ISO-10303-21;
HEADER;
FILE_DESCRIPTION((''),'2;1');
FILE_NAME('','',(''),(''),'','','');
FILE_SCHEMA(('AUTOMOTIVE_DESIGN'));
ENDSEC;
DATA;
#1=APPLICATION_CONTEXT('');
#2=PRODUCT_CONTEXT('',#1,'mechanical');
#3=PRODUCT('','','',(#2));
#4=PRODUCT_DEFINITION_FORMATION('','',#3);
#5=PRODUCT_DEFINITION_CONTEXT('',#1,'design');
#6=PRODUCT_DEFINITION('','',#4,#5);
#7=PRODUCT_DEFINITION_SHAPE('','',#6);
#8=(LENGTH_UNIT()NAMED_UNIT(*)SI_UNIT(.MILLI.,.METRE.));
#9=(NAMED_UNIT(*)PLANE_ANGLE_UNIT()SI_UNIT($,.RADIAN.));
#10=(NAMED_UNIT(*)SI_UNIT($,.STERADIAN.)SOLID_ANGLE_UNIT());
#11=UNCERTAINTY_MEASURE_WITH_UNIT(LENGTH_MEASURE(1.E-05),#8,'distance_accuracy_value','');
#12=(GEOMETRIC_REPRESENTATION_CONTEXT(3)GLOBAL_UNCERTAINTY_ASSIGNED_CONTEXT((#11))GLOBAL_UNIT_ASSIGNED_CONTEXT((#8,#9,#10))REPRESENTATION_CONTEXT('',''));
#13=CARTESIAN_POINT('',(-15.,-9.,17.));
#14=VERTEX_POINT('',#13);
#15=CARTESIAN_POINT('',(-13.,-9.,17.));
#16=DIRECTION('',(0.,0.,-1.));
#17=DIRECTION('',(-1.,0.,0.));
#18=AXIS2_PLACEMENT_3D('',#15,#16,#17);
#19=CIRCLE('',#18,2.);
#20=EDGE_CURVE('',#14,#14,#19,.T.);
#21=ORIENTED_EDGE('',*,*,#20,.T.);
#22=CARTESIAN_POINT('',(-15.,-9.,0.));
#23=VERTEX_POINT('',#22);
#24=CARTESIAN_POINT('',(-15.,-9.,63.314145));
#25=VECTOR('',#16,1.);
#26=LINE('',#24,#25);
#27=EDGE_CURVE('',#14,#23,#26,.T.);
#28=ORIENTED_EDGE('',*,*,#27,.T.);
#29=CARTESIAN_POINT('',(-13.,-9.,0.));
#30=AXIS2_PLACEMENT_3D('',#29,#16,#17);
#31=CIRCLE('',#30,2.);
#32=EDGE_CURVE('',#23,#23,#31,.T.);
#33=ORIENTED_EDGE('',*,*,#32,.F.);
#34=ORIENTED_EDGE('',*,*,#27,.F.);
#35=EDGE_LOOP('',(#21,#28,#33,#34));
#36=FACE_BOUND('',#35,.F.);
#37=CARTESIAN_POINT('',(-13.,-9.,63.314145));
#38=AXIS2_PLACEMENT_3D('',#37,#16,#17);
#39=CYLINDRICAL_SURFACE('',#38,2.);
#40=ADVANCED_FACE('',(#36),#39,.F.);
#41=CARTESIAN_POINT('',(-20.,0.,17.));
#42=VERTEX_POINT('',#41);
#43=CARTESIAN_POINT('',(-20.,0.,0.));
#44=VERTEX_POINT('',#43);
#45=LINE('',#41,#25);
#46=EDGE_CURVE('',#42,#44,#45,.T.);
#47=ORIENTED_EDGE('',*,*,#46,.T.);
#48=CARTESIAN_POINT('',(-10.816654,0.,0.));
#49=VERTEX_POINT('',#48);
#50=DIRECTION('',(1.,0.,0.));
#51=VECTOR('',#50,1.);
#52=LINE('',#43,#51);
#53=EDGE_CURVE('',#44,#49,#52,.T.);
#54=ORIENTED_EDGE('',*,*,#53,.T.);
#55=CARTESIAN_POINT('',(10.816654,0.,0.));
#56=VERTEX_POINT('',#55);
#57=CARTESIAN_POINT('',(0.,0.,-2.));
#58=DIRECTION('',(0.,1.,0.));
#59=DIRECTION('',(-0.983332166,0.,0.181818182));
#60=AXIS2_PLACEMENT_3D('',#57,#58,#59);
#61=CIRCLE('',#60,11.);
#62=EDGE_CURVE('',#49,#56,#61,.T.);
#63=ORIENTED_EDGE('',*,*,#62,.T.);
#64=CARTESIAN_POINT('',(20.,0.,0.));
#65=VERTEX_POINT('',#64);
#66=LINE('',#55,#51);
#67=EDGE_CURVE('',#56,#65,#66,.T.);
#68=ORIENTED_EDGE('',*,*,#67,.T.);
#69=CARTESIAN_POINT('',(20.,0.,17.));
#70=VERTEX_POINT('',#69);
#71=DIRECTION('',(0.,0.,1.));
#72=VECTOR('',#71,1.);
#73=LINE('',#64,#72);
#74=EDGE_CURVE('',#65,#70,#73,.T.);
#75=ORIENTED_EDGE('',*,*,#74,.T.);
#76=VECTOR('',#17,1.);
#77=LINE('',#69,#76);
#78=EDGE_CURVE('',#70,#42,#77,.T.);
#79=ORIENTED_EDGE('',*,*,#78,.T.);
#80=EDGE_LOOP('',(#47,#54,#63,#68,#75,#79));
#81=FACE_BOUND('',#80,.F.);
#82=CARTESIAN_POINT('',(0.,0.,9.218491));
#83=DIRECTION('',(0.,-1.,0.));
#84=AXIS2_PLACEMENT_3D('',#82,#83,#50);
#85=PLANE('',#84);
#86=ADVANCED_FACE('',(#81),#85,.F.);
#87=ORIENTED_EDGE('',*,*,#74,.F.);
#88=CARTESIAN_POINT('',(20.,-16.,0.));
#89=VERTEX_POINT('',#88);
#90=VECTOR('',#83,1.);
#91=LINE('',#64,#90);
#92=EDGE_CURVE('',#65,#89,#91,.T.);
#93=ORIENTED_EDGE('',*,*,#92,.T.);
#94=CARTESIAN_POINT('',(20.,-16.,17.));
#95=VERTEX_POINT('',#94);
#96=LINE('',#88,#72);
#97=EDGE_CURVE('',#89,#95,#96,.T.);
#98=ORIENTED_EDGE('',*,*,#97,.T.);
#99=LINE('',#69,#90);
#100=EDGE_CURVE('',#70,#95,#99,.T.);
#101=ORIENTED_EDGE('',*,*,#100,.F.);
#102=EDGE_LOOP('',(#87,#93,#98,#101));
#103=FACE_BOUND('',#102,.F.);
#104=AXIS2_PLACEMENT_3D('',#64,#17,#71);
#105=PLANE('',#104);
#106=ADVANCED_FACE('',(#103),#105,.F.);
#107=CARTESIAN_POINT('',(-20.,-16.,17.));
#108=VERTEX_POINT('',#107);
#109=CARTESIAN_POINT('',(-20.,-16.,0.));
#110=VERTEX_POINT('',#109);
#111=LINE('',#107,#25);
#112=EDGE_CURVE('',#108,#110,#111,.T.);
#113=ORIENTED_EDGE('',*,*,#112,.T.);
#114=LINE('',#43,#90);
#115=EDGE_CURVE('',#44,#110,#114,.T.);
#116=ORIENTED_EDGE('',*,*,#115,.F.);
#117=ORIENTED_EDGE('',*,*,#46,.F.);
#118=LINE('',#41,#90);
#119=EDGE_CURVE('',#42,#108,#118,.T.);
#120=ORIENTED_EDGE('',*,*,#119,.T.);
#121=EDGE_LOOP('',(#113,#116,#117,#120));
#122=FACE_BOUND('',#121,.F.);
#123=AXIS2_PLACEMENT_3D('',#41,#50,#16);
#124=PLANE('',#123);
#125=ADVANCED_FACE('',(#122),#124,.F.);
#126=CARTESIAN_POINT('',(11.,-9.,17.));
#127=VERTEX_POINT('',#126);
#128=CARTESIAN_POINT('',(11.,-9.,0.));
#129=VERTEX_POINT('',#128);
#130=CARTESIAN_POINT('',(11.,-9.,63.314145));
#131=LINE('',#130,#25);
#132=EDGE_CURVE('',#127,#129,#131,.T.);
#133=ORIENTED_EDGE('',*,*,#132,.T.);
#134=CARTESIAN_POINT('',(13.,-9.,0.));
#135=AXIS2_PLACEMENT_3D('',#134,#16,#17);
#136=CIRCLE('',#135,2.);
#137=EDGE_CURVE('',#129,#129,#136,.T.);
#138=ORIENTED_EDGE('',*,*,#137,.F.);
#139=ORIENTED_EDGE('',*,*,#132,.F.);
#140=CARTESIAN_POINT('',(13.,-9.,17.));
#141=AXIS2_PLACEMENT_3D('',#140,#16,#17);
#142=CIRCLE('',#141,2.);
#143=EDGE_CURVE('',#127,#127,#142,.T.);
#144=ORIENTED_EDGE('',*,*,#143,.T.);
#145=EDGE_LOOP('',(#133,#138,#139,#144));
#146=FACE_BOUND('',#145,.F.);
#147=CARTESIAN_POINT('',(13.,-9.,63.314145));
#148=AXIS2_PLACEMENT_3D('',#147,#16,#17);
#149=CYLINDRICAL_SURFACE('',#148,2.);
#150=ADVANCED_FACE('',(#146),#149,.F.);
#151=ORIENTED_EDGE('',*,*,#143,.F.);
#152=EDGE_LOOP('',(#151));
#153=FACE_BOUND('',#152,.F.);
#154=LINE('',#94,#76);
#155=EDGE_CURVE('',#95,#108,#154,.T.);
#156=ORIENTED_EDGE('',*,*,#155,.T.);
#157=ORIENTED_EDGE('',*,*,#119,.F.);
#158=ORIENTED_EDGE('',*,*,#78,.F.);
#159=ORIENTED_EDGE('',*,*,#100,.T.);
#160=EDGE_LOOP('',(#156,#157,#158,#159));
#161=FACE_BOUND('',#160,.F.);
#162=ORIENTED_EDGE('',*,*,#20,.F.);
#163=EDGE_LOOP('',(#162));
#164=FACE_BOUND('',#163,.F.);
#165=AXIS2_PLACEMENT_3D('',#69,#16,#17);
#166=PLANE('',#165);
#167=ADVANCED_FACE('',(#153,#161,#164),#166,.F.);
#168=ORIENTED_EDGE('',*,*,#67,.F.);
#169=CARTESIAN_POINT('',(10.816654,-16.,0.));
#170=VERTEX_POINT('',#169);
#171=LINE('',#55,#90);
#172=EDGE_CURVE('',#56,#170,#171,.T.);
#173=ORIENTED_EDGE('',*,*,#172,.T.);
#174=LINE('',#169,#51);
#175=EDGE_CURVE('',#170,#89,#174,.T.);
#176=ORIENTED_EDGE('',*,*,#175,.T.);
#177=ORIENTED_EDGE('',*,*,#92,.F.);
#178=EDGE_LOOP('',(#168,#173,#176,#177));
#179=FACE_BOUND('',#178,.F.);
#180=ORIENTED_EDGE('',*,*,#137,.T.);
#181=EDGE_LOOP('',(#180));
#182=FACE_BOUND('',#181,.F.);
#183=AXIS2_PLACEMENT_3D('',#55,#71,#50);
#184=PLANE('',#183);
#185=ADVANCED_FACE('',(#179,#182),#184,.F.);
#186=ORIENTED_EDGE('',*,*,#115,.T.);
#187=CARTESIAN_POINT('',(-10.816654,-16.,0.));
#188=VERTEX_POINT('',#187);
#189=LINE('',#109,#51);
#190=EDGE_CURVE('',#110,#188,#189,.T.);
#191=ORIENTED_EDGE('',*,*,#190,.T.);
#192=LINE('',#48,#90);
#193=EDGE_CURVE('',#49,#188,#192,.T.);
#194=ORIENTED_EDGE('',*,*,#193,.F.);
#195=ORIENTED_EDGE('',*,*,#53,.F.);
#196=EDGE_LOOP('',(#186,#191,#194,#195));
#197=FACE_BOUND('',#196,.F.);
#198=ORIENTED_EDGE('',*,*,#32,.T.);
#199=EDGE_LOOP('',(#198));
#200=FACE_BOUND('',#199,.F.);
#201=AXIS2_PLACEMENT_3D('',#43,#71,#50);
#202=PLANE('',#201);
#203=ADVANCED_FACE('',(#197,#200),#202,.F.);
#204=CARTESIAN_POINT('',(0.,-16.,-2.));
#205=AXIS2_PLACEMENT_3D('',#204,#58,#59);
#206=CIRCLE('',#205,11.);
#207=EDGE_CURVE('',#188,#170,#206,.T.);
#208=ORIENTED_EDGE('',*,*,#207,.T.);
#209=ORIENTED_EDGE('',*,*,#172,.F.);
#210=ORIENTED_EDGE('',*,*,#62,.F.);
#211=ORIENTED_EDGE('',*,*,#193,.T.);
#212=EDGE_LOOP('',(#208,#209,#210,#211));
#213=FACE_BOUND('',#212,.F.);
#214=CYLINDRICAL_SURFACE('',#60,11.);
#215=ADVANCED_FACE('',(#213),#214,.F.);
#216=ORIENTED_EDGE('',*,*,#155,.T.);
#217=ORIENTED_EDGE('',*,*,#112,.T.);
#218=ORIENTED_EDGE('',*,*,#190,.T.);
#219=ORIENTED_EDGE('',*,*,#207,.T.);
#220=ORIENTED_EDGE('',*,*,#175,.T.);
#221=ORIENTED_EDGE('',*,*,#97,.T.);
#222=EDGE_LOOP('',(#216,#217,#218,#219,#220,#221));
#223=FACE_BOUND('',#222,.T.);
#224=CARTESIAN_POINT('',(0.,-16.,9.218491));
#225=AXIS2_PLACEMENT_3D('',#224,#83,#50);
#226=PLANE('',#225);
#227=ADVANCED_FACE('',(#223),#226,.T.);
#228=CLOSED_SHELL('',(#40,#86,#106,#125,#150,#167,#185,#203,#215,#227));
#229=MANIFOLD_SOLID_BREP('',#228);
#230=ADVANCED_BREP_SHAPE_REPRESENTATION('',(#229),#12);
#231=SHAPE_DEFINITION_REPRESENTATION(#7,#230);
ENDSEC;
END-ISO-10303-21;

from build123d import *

# Parameters (mm, degrees)
F1_DEPTH = 16
F3_D     = 4


# Not quite as in the source:
# - a feature of the source that left no trace in its solid (it failed there, or was rolled back) is left out
# - the program builds the solid bodies; features that only make, move or delete a surface that nothing else refers to are left out


with BuildPart() as f1:
    # F0 (on Front) → F1 (new body)
    with BuildSketch(Plane.XZ):
        with BuildLine():
            ThreePointArc((-10.8166538264, 0), (0, 9), (10.8166538264, 0))
            Line((10.8166538264, 0), (20, 0))
            Line((20, 0), (20, 17))
            Line((20, 17), (-20, 17))
            Line((-20, 17), (-20, 0))
            Line((-20, 0), (-10.8166538264, 0))
        make_face()
    extrude(amount=F1_DEPTH)

    # F3 (through all)
    with Locations(Plane.XY.offset(17)):
        with Locations((13, -9), (-13, -9)):
            Hole(F3_D / 2)


solid = f1.part
